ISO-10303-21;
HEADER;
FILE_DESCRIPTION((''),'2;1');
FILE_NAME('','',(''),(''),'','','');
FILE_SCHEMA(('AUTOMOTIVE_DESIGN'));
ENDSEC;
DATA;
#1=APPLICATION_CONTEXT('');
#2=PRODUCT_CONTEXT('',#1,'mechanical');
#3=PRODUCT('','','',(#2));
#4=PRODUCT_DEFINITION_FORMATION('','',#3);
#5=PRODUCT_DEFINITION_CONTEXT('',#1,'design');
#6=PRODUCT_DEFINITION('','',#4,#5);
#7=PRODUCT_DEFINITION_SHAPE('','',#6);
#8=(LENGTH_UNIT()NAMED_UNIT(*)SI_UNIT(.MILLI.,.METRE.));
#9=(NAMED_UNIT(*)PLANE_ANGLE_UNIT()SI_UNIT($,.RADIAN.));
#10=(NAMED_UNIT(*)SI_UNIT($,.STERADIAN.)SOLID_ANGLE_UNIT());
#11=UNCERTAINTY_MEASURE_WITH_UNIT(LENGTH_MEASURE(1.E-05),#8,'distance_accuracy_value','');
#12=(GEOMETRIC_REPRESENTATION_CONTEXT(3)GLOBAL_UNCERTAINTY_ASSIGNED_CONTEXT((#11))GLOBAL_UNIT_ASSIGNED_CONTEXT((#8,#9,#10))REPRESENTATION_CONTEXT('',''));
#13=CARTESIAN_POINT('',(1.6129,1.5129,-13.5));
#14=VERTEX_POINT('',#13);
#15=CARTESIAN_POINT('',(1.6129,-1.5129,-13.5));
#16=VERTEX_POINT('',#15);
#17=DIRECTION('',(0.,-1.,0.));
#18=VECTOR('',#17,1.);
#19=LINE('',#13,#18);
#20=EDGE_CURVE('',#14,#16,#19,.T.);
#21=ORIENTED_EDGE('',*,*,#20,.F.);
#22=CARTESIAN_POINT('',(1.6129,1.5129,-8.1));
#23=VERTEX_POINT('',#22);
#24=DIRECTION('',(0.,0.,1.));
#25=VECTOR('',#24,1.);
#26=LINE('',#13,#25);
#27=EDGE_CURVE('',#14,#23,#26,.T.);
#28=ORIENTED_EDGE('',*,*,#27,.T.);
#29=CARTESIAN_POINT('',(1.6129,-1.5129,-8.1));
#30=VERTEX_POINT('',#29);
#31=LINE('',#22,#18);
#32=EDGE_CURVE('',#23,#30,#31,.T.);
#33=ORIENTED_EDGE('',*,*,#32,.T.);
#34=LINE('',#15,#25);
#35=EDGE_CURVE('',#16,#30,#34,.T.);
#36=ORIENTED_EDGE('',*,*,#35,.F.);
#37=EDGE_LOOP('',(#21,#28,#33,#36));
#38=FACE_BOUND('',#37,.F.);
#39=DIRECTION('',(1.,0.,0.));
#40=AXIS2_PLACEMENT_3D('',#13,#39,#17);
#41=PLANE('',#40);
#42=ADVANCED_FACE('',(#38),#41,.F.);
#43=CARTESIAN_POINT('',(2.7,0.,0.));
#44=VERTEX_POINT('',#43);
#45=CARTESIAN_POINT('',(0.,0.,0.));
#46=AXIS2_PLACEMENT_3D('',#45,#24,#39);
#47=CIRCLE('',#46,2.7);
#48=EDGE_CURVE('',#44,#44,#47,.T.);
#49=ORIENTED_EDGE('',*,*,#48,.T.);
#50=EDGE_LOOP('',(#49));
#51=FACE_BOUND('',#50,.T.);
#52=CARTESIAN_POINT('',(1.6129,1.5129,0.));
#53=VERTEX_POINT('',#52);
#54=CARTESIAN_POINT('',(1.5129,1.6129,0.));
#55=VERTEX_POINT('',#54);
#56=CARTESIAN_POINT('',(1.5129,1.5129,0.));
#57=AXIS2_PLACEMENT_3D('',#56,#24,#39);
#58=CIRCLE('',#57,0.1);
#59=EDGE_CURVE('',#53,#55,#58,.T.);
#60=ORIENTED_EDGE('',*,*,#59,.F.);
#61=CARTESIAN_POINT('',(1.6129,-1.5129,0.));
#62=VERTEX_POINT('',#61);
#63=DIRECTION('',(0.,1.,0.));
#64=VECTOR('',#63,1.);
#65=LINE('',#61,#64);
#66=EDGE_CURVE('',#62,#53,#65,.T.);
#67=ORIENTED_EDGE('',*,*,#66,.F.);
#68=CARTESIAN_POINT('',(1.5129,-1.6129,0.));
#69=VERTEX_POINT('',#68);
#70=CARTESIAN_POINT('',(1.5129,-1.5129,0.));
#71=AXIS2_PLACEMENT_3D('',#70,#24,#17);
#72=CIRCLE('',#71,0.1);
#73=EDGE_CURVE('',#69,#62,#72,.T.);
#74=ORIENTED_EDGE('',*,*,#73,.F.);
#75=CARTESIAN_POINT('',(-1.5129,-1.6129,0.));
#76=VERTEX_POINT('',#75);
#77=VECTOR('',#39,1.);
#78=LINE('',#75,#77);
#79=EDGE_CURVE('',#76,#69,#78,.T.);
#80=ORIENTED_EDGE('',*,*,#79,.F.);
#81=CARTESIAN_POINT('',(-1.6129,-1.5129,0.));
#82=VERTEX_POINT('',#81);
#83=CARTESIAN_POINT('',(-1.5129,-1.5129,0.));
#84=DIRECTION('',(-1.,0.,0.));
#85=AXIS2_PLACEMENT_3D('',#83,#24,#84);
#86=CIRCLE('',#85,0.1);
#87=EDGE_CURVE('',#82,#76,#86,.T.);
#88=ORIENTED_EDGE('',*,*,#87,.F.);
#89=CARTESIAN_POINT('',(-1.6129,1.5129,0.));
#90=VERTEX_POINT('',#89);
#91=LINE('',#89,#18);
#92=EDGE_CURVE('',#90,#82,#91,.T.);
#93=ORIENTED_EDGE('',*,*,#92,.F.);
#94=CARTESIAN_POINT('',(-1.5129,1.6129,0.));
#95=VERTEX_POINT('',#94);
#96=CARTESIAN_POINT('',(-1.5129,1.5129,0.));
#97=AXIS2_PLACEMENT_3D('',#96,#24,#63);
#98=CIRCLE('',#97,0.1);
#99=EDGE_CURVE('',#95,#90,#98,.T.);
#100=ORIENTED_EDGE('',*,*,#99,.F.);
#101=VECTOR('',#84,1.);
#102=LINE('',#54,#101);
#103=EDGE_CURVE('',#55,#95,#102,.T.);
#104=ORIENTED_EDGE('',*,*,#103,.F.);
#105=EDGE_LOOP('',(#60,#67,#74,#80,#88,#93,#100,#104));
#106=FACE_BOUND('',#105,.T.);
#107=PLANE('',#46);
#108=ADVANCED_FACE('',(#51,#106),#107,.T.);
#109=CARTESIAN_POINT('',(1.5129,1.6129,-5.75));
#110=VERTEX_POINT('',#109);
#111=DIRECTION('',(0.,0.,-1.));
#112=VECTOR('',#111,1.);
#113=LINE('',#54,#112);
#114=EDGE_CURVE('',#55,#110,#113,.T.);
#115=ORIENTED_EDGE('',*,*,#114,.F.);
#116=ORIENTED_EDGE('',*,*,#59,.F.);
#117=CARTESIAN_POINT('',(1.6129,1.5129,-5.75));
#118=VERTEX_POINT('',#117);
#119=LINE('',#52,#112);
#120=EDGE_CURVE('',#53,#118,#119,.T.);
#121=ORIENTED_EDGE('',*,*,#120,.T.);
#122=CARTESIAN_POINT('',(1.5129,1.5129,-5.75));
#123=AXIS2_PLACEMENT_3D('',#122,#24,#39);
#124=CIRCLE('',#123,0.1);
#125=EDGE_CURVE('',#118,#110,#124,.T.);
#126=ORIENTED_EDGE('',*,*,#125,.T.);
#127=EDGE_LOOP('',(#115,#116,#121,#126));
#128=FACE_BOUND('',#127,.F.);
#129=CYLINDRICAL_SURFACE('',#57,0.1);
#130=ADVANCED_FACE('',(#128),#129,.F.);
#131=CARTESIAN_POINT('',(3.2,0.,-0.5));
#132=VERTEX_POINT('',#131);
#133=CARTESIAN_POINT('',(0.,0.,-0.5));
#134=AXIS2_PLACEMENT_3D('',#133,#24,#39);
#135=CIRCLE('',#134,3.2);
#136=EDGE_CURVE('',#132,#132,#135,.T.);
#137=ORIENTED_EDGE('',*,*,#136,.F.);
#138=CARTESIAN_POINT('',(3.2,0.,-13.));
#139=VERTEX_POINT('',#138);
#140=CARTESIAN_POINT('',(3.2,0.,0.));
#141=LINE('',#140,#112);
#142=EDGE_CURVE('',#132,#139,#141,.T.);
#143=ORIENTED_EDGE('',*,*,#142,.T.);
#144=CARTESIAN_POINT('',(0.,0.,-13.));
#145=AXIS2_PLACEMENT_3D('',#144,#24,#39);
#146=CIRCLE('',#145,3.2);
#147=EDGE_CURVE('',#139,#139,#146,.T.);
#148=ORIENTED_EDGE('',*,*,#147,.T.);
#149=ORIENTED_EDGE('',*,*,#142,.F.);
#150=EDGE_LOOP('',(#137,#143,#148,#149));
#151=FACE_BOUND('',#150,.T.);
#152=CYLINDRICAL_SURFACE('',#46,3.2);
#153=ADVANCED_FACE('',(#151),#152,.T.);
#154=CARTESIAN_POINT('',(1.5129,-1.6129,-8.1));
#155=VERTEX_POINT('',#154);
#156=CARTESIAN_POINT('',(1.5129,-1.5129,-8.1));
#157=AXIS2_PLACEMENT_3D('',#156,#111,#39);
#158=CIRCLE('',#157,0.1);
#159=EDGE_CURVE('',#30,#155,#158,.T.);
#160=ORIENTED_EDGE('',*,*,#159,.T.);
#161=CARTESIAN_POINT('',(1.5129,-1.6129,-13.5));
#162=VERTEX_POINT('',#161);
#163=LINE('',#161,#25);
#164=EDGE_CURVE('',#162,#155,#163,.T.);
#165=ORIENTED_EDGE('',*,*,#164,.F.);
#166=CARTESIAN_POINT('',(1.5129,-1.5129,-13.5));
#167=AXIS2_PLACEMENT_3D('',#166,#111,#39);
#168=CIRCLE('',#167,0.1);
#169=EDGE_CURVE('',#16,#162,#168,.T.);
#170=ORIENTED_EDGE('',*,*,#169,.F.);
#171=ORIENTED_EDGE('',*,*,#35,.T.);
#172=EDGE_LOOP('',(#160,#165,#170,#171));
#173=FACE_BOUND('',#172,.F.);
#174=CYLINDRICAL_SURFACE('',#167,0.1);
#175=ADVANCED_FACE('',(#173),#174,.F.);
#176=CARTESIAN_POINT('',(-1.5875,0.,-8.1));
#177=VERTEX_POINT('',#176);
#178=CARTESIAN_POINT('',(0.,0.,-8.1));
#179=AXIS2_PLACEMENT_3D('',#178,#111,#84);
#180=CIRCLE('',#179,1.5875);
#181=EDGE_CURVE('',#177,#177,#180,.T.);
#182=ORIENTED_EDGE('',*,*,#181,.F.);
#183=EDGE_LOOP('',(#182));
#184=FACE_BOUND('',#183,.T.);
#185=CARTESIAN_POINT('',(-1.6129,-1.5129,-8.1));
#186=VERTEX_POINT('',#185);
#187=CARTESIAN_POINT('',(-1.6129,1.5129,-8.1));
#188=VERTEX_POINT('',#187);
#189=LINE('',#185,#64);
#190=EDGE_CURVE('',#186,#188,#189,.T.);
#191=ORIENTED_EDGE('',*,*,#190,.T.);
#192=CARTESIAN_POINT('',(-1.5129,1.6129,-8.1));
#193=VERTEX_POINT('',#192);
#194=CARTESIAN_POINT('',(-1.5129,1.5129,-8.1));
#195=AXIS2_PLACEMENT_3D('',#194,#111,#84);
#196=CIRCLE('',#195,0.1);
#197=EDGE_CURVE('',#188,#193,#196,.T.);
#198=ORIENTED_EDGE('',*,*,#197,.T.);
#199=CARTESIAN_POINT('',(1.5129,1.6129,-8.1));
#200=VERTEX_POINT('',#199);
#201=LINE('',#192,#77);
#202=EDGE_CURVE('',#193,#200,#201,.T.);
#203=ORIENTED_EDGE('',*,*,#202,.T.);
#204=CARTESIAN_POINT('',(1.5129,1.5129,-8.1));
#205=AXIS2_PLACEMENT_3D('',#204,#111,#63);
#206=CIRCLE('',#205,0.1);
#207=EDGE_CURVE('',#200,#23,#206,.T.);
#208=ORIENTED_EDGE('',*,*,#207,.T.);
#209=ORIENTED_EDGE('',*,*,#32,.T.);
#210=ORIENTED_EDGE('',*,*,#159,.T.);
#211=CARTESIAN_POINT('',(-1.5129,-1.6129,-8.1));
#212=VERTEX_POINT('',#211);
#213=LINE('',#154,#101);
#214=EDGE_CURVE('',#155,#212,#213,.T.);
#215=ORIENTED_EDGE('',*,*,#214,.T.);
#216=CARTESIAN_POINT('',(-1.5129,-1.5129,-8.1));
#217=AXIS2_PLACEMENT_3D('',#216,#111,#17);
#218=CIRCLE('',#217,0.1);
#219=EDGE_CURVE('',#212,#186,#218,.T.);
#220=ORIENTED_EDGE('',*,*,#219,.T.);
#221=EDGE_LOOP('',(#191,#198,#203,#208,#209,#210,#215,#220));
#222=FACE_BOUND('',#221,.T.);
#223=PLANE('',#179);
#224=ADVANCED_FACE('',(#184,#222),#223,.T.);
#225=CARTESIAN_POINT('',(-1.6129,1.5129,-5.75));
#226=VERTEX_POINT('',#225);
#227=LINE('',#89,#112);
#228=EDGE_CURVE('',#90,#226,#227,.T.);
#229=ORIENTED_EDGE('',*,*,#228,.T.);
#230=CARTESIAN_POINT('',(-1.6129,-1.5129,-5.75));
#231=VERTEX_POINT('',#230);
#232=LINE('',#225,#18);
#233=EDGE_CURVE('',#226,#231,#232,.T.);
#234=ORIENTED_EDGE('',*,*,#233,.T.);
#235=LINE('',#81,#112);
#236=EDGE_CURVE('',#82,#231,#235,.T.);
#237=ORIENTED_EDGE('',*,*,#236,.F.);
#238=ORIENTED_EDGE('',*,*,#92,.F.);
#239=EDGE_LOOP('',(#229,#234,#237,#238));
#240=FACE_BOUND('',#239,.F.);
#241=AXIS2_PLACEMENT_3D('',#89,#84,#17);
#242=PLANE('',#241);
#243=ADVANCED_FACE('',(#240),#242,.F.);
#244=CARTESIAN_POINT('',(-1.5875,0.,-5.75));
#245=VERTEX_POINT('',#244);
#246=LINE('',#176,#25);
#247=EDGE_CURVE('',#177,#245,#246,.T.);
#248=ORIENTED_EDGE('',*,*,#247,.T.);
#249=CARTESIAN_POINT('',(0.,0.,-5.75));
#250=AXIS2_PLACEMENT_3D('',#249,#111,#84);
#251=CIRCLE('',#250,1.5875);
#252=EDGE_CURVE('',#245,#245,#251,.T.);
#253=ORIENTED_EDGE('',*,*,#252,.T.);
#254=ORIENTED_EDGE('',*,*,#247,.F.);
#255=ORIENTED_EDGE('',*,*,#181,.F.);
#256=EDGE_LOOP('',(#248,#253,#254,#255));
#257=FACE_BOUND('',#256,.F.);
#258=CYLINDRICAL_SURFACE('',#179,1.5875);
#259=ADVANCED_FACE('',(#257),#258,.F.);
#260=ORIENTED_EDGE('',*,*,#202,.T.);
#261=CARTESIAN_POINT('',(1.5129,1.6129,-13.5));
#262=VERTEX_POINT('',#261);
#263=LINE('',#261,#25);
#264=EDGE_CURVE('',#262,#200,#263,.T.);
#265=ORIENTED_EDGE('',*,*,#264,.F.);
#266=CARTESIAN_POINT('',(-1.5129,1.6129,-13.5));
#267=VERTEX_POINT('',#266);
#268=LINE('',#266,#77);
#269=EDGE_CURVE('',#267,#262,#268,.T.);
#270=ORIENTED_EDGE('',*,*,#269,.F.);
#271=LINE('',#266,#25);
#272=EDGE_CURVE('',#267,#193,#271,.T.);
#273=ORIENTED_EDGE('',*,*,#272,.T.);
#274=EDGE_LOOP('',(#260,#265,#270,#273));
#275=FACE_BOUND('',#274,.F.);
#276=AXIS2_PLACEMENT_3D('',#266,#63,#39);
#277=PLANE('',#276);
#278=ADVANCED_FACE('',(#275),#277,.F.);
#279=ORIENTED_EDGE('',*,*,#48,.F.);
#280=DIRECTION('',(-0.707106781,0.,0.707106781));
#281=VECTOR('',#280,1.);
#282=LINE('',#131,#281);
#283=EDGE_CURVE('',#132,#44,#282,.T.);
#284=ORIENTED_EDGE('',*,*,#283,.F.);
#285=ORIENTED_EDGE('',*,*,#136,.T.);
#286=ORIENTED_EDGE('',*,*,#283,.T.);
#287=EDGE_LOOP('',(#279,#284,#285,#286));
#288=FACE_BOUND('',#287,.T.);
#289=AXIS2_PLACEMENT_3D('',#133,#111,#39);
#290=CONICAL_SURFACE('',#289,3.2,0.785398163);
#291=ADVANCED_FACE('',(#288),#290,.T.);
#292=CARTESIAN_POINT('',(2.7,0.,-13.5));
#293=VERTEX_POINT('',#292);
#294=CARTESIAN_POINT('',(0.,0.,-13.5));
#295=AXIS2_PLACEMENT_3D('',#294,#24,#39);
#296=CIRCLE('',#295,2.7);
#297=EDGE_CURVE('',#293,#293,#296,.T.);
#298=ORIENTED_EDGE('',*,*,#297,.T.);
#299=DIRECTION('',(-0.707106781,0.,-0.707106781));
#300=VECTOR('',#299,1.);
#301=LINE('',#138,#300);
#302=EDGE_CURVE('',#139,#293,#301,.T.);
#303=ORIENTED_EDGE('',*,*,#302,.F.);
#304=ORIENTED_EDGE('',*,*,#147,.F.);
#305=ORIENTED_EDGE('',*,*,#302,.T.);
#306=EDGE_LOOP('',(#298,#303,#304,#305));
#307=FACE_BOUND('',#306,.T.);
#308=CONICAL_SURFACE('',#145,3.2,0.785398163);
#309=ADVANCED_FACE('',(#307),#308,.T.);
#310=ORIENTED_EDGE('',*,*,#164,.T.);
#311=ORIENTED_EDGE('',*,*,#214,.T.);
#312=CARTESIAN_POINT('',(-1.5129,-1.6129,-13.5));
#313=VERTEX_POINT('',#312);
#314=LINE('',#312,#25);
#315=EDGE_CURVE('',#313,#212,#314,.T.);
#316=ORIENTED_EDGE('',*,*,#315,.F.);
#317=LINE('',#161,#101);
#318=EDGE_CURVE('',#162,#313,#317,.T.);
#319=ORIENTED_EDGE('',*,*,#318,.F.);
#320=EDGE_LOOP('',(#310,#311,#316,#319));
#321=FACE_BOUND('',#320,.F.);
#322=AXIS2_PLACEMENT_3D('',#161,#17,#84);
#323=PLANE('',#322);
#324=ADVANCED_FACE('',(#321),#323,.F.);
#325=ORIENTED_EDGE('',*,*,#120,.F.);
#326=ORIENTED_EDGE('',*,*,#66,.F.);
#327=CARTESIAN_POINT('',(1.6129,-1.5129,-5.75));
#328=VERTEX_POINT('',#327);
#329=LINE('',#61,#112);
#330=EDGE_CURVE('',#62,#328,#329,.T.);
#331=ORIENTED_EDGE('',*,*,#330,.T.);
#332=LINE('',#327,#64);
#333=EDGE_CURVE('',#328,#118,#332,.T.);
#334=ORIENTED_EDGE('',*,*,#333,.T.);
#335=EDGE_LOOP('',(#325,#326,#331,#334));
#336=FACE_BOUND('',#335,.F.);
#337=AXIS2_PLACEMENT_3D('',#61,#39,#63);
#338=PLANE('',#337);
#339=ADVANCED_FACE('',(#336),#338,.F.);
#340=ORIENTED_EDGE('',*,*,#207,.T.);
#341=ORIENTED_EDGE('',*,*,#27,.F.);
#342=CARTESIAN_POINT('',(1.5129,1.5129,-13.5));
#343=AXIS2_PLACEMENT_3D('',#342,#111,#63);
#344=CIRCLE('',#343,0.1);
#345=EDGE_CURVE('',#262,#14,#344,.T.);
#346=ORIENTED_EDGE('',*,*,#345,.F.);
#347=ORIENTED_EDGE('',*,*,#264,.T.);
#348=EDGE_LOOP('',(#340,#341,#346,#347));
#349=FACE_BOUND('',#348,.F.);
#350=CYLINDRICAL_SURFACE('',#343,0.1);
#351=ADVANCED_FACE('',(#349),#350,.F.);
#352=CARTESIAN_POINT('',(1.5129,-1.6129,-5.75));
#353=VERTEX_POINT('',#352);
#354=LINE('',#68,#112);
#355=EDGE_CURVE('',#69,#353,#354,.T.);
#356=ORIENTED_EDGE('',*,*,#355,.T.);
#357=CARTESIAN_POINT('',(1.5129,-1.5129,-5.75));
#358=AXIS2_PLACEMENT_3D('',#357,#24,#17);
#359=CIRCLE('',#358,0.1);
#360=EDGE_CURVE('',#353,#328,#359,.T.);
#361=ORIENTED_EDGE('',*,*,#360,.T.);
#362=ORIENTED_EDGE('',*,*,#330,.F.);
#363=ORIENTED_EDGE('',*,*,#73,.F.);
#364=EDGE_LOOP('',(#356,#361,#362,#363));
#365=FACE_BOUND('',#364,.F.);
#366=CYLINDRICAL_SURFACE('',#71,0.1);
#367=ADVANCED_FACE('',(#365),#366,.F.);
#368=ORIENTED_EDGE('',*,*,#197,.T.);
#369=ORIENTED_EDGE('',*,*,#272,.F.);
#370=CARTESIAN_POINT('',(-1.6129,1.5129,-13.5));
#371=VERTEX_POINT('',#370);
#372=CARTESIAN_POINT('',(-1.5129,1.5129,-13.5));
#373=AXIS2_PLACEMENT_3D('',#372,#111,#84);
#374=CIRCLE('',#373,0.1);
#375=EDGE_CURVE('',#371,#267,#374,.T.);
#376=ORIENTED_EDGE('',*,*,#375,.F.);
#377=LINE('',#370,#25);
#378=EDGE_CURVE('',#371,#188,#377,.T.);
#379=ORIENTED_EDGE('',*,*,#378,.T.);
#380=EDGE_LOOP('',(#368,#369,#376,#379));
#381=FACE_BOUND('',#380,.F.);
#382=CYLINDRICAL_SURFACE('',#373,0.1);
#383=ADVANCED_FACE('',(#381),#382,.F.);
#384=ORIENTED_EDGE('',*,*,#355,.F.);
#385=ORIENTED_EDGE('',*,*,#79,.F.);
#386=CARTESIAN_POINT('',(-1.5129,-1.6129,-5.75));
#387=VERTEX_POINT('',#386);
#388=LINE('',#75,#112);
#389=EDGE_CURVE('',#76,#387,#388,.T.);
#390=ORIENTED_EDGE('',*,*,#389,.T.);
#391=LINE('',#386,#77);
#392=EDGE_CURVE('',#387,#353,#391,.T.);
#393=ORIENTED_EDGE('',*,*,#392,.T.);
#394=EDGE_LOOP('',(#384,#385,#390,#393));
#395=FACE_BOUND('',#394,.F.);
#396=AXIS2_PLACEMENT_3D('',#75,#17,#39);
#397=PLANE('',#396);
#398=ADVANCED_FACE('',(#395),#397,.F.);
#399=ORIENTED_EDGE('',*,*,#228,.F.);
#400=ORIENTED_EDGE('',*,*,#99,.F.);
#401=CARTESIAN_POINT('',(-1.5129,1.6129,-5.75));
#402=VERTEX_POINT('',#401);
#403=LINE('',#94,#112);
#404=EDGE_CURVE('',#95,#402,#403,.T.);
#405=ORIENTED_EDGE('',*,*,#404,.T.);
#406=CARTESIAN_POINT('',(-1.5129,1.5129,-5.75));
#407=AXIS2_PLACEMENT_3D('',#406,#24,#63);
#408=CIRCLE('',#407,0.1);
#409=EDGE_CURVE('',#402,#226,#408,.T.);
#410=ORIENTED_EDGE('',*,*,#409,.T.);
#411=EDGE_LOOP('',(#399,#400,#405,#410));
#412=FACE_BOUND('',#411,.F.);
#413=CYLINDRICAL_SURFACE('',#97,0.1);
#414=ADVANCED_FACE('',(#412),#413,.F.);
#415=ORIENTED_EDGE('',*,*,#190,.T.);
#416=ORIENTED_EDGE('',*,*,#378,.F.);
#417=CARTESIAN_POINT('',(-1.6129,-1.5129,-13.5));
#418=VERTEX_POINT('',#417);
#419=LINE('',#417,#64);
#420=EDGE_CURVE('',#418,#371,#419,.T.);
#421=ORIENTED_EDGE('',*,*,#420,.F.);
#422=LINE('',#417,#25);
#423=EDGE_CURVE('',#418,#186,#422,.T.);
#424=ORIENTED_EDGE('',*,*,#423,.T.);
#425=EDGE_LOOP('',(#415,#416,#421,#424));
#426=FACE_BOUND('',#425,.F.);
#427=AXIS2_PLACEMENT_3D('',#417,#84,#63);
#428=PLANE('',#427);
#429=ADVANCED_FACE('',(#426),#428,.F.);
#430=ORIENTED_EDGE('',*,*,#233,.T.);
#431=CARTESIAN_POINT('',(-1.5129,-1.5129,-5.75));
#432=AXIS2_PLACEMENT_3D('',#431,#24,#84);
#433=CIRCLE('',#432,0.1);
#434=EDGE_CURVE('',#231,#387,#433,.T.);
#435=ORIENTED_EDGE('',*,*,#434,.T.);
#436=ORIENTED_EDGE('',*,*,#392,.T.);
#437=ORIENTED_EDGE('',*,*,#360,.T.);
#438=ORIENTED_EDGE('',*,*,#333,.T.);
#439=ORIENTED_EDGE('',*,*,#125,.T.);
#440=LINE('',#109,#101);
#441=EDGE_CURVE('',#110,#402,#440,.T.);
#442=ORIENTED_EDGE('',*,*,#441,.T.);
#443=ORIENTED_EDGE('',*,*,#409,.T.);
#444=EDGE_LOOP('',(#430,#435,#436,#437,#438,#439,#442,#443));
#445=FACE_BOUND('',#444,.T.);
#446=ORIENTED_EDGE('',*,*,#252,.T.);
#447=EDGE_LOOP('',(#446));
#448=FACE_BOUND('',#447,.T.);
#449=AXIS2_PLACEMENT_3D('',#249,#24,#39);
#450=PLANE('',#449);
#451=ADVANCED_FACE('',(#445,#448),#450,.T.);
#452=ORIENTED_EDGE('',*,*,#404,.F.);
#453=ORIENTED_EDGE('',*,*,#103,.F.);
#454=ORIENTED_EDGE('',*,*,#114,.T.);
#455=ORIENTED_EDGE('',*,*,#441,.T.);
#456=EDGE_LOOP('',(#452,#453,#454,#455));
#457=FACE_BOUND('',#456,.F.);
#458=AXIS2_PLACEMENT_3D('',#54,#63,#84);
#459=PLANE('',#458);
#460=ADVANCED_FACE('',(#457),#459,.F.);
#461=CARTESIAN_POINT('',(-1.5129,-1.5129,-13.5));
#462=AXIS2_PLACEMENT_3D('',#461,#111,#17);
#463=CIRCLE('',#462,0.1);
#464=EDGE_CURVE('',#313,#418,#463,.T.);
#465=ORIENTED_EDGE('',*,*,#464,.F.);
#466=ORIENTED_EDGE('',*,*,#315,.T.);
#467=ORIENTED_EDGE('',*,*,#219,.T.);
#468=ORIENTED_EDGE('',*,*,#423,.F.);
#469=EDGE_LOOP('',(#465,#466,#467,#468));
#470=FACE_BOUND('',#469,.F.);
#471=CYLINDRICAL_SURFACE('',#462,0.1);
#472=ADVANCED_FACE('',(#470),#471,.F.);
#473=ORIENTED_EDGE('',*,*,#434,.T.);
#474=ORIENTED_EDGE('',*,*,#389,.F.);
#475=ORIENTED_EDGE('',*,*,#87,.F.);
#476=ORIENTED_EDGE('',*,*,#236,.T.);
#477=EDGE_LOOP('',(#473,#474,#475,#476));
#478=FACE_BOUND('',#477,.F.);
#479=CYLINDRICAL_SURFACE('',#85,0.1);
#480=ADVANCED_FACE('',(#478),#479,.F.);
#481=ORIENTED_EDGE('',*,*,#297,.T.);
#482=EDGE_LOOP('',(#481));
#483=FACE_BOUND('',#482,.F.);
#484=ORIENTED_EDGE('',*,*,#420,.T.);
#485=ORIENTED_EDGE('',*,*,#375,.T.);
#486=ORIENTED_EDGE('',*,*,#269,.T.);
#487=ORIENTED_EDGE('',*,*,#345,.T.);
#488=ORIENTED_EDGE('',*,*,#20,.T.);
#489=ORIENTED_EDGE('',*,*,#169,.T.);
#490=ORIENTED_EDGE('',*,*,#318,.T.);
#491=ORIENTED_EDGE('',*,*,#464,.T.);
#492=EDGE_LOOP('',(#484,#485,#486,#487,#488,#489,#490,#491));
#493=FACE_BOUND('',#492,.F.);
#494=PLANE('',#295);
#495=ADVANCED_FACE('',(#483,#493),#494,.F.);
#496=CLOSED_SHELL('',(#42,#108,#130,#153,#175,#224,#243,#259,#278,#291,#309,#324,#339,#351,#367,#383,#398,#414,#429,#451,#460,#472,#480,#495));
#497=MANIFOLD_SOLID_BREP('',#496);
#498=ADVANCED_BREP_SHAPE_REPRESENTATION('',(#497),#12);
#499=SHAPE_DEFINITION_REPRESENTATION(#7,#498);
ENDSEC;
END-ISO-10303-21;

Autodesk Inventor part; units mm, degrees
ref_plane "YZ Plane" through (0, 0, 0) normal (1, 0, 0) x (0, 1, 0)
ref_plane "XZ Plane" through (0, 0, 0) normal (0, 1, 0) x (-1, 0, 0)
ref_plane "XY Plane" through (0, 0, 0) normal (0, 0, 1) x (1, 0, 0)
sketch "Sketch1" plane through (0, 0, 0) normal (0, 0, 1) x (1, 0, 0)
  circle A0 centre (0, 0) radius 3.2
  dimension "d0" = 6.4
extrude "Extrusion1" add sketch "Sketch1" against normal blind 13.5
sketch "Sketch2" plane through (0, 0, 0) normal (0, 0, 1) x (1, 0, 0)
  circle A0 centre (0, 0) radius 2.7
  line L0 (1.6129, -1.5129) -> (1.6129, 1.5129)
  arc A1 (1.5129, -1.6129) -> (1.6129, -1.5129) centre (1.5129, -1.5129) ccw
  line L1 (-1.5129, -1.6129) -> (1.5129, -1.6129)
  arc A2 (-1.6129, -1.5129) -> (-1.5129, -1.6129) centre (-1.5129, -1.5129) ccw
  line L2 (-1.6129, 1.5129) -> (-1.6129, -1.5129)
  arc A3 (-1.5129, 1.6129) -> (-1.6129, 1.5129) centre (-1.5129, 1.5129) ccw
  line L3 (1.5129, 1.6129) -> (-1.5129, 1.6129)
  arc A4 (1.6129, 1.5129) -> (1.5129, 1.6129) centre (1.5129, 1.5129) ccw
extrude "Extrusion2" cut sketch "Sketch2" against normal blind 5.75 contours A1 L1 A2 L2 A3 L3 A4 L0
sketch "Sketch3" plane through (0, 0, -13.5) normal (0, 0, -1) x (-1, 0, 0)
  circle A0 centre (0, 0) radius 2.7
  line L0 (1.6129, -1.5129) -> (1.6129, 1.5129)
  arc A1 (1.5129, -1.6129) -> (1.6129, -1.5129) centre (1.5129, -1.5129) ccw
  line L1 (-1.5129, -1.6129) -> (1.5129, -1.6129)
  arc A2 (-1.6129, -1.5129) -> (-1.5129, -1.6129) centre (-1.5129, -1.5129) ccw
  line L2 (-1.6129, 1.5129) -> (-1.6129, -1.5129)
  arc A3 (-1.5129, 1.6129) -> (-1.6129, 1.5129) centre (-1.5129, 1.5129) ccw
  line L3 (1.5129, 1.6129) -> (-1.5129, 1.6129)
  arc A4 (1.6129, 1.5129) -> (1.5129, 1.6129) centre (1.5129, 1.5129) ccw
extrude "Extrusion3" cut sketch "Sketch3" against normal blind 5.4 contours A1 L1 A2 L2 A3 L3 A4 L0
sketch "Sketch4" plane through (0, 0, -8.1) normal (0, 0, -1) x (-1, 0, 0)
  circle A0 centre (0, 0) radius 1.5875
  dimension "d7" = 3.175
extrude "Extrusion4" cut sketch "Sketch4" against normal up to next
chamfer "Chamfer1" distance 0.5 angle 45 2 edges at (-3.2, 0, -13.5) (-3.2, 0, 0)
sketch "Sketch5" plane through (0, 0, 0) normal (0, 0, 1) x (1, 0, 0)
  line L0 (1.6129, 1.5129) -> (1.6129, -1.5129) projected
  line L1 (1.5129, -1.6129) -> (-1.5129, -1.6129) projected
  line L2 (-1.6129, -1.5129) -> (-1.6129, 1.5129) projected
  line L3 (-1.5129, 1.6129) -> (1.5129, 1.6129) projected
  circle A0 centre (0, 0) radius 2.7 projected
  circle A1 centre (0, 0) radius 1.6129
surface extrude "ExtrusionSrf1" sketch "Sketch5" against normal up to surface (13.5 mm away) shown no curves A1
properties part number "276-1843" material "Steel"
